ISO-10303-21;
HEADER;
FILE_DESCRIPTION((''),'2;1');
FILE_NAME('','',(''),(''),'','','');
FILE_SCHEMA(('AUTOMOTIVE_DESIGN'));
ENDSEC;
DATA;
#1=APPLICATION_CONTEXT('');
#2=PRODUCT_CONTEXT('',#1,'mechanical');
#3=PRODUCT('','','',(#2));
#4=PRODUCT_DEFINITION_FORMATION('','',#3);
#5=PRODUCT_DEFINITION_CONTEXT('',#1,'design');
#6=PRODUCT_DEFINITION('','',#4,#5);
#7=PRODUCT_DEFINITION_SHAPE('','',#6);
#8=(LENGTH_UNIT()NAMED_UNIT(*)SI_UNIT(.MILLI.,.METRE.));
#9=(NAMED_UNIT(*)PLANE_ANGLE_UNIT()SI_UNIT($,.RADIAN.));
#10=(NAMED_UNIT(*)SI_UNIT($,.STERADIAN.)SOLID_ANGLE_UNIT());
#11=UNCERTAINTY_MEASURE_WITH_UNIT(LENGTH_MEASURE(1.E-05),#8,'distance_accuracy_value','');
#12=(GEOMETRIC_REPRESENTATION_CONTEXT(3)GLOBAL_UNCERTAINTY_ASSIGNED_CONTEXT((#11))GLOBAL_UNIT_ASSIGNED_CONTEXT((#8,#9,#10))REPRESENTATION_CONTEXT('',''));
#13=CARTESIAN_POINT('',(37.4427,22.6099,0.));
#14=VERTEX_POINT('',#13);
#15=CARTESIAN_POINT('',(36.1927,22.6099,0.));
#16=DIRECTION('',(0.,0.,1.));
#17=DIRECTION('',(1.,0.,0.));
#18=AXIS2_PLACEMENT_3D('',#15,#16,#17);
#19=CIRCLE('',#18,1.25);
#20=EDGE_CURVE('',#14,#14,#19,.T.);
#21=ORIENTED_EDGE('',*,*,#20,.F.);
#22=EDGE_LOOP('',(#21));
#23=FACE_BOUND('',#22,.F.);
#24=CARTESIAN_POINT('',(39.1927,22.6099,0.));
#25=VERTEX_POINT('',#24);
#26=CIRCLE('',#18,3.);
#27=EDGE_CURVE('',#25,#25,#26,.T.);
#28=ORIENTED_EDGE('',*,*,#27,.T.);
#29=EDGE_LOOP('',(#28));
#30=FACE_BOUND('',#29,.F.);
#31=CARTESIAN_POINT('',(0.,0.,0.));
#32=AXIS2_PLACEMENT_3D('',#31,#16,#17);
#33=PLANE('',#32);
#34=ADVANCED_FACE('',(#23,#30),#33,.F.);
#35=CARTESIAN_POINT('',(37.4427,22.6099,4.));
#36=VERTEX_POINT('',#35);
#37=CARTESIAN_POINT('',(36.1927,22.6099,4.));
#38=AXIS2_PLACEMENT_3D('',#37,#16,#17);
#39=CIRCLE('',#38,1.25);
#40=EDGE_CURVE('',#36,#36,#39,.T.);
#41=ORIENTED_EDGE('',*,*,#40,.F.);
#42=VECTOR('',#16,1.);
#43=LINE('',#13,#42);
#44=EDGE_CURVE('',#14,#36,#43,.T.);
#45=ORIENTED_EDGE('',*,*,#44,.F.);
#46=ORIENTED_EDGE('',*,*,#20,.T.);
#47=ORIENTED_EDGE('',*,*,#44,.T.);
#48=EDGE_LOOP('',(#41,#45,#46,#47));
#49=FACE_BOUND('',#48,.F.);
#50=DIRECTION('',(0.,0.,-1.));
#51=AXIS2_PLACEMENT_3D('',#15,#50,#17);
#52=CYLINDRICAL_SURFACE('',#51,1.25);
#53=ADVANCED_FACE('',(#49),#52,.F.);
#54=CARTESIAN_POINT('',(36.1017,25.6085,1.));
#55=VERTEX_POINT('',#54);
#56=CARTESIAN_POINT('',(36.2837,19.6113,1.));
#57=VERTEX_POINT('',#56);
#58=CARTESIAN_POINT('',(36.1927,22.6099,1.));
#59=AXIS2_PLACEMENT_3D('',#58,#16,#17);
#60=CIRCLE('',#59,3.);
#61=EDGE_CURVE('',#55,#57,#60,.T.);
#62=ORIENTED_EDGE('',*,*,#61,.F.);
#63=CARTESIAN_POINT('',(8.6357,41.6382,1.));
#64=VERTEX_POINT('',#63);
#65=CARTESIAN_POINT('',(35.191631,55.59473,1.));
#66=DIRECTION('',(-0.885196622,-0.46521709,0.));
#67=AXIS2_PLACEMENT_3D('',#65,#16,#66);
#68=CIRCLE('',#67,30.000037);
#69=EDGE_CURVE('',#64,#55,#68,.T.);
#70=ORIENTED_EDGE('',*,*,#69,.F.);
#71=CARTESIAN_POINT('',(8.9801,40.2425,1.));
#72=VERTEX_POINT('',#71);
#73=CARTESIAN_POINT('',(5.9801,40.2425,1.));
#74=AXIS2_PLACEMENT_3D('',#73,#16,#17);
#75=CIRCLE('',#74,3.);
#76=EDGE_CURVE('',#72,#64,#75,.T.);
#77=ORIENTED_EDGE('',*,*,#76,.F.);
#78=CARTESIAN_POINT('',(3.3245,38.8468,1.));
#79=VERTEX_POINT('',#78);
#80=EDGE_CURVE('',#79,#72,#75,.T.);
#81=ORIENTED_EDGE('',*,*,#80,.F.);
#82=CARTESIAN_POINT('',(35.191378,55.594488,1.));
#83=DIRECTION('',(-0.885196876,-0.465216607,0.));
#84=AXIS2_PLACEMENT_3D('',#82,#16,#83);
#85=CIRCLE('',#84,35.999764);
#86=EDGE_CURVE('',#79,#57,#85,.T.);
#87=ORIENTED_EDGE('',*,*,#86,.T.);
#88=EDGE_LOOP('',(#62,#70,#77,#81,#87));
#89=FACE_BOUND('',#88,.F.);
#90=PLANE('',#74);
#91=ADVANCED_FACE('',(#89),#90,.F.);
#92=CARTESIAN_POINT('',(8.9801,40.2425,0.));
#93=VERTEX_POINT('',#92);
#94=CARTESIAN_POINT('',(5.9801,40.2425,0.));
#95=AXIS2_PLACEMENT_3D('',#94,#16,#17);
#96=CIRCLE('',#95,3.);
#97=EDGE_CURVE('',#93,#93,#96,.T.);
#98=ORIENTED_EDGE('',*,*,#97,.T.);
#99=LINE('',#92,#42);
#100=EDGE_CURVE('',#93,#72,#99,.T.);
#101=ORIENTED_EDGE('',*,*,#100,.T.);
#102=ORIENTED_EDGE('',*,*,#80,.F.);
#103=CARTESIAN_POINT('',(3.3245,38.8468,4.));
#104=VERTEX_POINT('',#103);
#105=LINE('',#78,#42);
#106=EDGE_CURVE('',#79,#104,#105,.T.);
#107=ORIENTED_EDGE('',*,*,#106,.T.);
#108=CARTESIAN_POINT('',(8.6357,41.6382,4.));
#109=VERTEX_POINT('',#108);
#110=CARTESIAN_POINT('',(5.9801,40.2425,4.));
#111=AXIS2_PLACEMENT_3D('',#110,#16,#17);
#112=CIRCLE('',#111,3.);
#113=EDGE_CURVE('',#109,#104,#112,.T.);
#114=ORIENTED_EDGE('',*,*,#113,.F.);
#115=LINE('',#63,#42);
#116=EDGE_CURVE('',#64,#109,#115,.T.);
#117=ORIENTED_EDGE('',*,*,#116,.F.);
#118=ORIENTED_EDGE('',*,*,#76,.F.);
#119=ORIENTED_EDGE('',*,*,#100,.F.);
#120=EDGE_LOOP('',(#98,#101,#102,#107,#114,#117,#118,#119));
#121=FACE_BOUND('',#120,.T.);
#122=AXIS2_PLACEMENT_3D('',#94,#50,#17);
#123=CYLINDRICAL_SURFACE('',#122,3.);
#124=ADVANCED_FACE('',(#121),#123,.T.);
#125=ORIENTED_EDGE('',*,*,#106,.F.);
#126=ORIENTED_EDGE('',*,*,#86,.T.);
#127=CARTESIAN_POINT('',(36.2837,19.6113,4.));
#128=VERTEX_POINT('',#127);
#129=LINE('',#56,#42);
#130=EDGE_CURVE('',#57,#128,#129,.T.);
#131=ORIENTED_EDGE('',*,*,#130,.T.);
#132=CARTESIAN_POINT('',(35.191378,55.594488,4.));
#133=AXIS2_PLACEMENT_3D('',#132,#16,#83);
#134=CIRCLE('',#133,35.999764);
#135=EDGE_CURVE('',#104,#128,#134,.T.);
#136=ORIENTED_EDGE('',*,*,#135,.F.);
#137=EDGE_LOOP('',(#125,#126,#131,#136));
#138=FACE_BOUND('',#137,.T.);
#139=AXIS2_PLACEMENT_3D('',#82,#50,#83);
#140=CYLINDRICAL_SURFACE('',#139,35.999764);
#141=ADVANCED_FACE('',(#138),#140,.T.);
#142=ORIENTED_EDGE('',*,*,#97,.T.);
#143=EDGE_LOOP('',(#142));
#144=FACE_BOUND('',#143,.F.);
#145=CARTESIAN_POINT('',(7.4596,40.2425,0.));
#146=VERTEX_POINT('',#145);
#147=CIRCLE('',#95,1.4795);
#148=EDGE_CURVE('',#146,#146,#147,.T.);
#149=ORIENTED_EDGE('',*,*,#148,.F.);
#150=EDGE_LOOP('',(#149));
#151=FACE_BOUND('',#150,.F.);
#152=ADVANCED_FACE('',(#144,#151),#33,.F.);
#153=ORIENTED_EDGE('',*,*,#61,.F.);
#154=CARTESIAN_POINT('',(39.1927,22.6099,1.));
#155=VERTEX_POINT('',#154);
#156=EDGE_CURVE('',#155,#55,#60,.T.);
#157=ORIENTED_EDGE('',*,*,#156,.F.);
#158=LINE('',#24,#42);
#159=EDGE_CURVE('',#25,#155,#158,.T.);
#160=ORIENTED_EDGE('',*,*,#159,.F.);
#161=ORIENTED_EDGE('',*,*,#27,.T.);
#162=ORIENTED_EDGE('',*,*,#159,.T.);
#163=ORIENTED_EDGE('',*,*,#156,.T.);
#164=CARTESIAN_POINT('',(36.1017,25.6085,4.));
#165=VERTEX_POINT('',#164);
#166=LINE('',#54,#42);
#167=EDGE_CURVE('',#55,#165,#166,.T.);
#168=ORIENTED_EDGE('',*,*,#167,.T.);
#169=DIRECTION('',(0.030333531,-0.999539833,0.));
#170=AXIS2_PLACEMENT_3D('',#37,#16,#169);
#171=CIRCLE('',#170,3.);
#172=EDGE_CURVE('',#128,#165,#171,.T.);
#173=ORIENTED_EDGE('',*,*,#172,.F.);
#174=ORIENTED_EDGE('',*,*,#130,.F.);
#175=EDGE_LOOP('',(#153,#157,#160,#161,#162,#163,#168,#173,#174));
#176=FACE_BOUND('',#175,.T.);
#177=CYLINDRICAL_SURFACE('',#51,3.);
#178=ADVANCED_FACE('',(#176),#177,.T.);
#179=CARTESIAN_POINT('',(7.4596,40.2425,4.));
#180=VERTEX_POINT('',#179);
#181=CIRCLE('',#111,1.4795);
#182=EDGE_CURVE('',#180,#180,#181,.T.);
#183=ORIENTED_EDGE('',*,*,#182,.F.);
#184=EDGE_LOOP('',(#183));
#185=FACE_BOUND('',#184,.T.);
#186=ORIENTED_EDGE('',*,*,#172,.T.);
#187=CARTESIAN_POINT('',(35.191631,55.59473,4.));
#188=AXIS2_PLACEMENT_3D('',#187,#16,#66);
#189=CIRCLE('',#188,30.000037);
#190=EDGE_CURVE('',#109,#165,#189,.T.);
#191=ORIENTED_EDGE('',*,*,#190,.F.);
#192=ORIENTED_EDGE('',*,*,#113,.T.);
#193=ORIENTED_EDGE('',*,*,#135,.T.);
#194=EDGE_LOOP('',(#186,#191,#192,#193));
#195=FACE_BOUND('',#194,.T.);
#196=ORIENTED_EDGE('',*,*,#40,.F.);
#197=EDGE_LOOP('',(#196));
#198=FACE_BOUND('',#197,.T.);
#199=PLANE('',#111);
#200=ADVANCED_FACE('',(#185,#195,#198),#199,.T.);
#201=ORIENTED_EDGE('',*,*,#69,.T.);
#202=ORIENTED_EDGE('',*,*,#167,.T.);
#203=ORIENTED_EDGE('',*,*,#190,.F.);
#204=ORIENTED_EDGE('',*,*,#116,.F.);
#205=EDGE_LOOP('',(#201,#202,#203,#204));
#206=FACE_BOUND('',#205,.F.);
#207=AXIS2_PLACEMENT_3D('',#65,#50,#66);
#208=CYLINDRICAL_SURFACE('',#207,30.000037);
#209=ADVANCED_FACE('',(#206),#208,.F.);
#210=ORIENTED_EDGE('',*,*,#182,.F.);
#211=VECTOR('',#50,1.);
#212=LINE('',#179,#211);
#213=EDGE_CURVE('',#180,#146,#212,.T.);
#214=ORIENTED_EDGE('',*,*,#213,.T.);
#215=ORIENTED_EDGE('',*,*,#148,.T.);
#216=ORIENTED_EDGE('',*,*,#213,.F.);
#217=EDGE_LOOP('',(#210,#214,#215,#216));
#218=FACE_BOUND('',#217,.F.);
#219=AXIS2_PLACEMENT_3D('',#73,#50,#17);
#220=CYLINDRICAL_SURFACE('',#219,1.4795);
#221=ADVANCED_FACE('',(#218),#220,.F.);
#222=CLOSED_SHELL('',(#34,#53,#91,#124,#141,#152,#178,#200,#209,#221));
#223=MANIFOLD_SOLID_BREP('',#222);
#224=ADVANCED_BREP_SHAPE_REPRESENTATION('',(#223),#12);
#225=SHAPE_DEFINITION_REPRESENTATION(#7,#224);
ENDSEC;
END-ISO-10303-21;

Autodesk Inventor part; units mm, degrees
ref_plane "YZ Plane" through (0, 0, 0) normal (1, 0, 0) x (0, 1, 0)
ref_plane "XZ Plane" through (0, 0, 0) normal (0, 1, 0) x (-1, 0, 0)
ref_plane "XY Plane" through (0, 0, 0) normal (0, 0, 1) x (1, 0, 0)
sketch "Sketch1" plane through (0, 0, 0) normal (0, 0, 1) x (1, 0, 0)
  circle A0 centre (36.1927, 22.6099) radius 1.25 projected
  circle A1 centre (36.1927, 22.6099) radius 3
  circle A2 centre (5.9801, 40.2425) radius 1.4795 projected
  circle A3 centre (5.9801, 40.2425) radius 3
  point P0 (0, 0)
  dimension "d9" = 6
extrude "Extrusion1" add sketch "Sketch1" along normal blind 1
sketch "Sketch5" plane through (5.9801, 40.2425, 1) normal (0, 0, 1) x (1, 0, 0)
  circle A0 centre (0, 0) radius 3 projected
  circle A1 centre (0, 0) radius 1.4795 projected
  circle A2 centre (30.2126, -17.6326) radius 3 projected
  circle A3 centre (30.2126, -17.6326) radius 1.25 projected
  arc A4 (0, 0) -> (30.2126, -17.6326) centre (29.2115, 15.3522) ccw construction
  arc A5 (-2.6556, -1.3957) -> (30.3036, -20.6312) centre (29.2115, 15.3522) ccw
  arc A6 (2.6556, 1.3957) -> (30.1216, -14.634) centre (29.2115, 15.3522) ccw
  arc A7 (2.6556, 1.3957) -> (-2.6556, -1.3957) centre (0, 0) ccw
  arc A8 (30.3036, -20.6312) -> (30.1216, -14.634) centre (30.2126, -17.6326) ccw
  circle A9 centre (30.2126, -17.6326) radius 3 projected
  point P0 (-5.9801, -40.2425)
  point P1 (30.1216, -14.634)
  point P2 (2.6556, 1.3957)
  point P3 (-2.6556, -1.3957)
  point P4 (30.3036, -20.6312)
  dimension "d10" = 30
extrude "Extrusion4" add sketch "Sketch5" along normal blind 3
